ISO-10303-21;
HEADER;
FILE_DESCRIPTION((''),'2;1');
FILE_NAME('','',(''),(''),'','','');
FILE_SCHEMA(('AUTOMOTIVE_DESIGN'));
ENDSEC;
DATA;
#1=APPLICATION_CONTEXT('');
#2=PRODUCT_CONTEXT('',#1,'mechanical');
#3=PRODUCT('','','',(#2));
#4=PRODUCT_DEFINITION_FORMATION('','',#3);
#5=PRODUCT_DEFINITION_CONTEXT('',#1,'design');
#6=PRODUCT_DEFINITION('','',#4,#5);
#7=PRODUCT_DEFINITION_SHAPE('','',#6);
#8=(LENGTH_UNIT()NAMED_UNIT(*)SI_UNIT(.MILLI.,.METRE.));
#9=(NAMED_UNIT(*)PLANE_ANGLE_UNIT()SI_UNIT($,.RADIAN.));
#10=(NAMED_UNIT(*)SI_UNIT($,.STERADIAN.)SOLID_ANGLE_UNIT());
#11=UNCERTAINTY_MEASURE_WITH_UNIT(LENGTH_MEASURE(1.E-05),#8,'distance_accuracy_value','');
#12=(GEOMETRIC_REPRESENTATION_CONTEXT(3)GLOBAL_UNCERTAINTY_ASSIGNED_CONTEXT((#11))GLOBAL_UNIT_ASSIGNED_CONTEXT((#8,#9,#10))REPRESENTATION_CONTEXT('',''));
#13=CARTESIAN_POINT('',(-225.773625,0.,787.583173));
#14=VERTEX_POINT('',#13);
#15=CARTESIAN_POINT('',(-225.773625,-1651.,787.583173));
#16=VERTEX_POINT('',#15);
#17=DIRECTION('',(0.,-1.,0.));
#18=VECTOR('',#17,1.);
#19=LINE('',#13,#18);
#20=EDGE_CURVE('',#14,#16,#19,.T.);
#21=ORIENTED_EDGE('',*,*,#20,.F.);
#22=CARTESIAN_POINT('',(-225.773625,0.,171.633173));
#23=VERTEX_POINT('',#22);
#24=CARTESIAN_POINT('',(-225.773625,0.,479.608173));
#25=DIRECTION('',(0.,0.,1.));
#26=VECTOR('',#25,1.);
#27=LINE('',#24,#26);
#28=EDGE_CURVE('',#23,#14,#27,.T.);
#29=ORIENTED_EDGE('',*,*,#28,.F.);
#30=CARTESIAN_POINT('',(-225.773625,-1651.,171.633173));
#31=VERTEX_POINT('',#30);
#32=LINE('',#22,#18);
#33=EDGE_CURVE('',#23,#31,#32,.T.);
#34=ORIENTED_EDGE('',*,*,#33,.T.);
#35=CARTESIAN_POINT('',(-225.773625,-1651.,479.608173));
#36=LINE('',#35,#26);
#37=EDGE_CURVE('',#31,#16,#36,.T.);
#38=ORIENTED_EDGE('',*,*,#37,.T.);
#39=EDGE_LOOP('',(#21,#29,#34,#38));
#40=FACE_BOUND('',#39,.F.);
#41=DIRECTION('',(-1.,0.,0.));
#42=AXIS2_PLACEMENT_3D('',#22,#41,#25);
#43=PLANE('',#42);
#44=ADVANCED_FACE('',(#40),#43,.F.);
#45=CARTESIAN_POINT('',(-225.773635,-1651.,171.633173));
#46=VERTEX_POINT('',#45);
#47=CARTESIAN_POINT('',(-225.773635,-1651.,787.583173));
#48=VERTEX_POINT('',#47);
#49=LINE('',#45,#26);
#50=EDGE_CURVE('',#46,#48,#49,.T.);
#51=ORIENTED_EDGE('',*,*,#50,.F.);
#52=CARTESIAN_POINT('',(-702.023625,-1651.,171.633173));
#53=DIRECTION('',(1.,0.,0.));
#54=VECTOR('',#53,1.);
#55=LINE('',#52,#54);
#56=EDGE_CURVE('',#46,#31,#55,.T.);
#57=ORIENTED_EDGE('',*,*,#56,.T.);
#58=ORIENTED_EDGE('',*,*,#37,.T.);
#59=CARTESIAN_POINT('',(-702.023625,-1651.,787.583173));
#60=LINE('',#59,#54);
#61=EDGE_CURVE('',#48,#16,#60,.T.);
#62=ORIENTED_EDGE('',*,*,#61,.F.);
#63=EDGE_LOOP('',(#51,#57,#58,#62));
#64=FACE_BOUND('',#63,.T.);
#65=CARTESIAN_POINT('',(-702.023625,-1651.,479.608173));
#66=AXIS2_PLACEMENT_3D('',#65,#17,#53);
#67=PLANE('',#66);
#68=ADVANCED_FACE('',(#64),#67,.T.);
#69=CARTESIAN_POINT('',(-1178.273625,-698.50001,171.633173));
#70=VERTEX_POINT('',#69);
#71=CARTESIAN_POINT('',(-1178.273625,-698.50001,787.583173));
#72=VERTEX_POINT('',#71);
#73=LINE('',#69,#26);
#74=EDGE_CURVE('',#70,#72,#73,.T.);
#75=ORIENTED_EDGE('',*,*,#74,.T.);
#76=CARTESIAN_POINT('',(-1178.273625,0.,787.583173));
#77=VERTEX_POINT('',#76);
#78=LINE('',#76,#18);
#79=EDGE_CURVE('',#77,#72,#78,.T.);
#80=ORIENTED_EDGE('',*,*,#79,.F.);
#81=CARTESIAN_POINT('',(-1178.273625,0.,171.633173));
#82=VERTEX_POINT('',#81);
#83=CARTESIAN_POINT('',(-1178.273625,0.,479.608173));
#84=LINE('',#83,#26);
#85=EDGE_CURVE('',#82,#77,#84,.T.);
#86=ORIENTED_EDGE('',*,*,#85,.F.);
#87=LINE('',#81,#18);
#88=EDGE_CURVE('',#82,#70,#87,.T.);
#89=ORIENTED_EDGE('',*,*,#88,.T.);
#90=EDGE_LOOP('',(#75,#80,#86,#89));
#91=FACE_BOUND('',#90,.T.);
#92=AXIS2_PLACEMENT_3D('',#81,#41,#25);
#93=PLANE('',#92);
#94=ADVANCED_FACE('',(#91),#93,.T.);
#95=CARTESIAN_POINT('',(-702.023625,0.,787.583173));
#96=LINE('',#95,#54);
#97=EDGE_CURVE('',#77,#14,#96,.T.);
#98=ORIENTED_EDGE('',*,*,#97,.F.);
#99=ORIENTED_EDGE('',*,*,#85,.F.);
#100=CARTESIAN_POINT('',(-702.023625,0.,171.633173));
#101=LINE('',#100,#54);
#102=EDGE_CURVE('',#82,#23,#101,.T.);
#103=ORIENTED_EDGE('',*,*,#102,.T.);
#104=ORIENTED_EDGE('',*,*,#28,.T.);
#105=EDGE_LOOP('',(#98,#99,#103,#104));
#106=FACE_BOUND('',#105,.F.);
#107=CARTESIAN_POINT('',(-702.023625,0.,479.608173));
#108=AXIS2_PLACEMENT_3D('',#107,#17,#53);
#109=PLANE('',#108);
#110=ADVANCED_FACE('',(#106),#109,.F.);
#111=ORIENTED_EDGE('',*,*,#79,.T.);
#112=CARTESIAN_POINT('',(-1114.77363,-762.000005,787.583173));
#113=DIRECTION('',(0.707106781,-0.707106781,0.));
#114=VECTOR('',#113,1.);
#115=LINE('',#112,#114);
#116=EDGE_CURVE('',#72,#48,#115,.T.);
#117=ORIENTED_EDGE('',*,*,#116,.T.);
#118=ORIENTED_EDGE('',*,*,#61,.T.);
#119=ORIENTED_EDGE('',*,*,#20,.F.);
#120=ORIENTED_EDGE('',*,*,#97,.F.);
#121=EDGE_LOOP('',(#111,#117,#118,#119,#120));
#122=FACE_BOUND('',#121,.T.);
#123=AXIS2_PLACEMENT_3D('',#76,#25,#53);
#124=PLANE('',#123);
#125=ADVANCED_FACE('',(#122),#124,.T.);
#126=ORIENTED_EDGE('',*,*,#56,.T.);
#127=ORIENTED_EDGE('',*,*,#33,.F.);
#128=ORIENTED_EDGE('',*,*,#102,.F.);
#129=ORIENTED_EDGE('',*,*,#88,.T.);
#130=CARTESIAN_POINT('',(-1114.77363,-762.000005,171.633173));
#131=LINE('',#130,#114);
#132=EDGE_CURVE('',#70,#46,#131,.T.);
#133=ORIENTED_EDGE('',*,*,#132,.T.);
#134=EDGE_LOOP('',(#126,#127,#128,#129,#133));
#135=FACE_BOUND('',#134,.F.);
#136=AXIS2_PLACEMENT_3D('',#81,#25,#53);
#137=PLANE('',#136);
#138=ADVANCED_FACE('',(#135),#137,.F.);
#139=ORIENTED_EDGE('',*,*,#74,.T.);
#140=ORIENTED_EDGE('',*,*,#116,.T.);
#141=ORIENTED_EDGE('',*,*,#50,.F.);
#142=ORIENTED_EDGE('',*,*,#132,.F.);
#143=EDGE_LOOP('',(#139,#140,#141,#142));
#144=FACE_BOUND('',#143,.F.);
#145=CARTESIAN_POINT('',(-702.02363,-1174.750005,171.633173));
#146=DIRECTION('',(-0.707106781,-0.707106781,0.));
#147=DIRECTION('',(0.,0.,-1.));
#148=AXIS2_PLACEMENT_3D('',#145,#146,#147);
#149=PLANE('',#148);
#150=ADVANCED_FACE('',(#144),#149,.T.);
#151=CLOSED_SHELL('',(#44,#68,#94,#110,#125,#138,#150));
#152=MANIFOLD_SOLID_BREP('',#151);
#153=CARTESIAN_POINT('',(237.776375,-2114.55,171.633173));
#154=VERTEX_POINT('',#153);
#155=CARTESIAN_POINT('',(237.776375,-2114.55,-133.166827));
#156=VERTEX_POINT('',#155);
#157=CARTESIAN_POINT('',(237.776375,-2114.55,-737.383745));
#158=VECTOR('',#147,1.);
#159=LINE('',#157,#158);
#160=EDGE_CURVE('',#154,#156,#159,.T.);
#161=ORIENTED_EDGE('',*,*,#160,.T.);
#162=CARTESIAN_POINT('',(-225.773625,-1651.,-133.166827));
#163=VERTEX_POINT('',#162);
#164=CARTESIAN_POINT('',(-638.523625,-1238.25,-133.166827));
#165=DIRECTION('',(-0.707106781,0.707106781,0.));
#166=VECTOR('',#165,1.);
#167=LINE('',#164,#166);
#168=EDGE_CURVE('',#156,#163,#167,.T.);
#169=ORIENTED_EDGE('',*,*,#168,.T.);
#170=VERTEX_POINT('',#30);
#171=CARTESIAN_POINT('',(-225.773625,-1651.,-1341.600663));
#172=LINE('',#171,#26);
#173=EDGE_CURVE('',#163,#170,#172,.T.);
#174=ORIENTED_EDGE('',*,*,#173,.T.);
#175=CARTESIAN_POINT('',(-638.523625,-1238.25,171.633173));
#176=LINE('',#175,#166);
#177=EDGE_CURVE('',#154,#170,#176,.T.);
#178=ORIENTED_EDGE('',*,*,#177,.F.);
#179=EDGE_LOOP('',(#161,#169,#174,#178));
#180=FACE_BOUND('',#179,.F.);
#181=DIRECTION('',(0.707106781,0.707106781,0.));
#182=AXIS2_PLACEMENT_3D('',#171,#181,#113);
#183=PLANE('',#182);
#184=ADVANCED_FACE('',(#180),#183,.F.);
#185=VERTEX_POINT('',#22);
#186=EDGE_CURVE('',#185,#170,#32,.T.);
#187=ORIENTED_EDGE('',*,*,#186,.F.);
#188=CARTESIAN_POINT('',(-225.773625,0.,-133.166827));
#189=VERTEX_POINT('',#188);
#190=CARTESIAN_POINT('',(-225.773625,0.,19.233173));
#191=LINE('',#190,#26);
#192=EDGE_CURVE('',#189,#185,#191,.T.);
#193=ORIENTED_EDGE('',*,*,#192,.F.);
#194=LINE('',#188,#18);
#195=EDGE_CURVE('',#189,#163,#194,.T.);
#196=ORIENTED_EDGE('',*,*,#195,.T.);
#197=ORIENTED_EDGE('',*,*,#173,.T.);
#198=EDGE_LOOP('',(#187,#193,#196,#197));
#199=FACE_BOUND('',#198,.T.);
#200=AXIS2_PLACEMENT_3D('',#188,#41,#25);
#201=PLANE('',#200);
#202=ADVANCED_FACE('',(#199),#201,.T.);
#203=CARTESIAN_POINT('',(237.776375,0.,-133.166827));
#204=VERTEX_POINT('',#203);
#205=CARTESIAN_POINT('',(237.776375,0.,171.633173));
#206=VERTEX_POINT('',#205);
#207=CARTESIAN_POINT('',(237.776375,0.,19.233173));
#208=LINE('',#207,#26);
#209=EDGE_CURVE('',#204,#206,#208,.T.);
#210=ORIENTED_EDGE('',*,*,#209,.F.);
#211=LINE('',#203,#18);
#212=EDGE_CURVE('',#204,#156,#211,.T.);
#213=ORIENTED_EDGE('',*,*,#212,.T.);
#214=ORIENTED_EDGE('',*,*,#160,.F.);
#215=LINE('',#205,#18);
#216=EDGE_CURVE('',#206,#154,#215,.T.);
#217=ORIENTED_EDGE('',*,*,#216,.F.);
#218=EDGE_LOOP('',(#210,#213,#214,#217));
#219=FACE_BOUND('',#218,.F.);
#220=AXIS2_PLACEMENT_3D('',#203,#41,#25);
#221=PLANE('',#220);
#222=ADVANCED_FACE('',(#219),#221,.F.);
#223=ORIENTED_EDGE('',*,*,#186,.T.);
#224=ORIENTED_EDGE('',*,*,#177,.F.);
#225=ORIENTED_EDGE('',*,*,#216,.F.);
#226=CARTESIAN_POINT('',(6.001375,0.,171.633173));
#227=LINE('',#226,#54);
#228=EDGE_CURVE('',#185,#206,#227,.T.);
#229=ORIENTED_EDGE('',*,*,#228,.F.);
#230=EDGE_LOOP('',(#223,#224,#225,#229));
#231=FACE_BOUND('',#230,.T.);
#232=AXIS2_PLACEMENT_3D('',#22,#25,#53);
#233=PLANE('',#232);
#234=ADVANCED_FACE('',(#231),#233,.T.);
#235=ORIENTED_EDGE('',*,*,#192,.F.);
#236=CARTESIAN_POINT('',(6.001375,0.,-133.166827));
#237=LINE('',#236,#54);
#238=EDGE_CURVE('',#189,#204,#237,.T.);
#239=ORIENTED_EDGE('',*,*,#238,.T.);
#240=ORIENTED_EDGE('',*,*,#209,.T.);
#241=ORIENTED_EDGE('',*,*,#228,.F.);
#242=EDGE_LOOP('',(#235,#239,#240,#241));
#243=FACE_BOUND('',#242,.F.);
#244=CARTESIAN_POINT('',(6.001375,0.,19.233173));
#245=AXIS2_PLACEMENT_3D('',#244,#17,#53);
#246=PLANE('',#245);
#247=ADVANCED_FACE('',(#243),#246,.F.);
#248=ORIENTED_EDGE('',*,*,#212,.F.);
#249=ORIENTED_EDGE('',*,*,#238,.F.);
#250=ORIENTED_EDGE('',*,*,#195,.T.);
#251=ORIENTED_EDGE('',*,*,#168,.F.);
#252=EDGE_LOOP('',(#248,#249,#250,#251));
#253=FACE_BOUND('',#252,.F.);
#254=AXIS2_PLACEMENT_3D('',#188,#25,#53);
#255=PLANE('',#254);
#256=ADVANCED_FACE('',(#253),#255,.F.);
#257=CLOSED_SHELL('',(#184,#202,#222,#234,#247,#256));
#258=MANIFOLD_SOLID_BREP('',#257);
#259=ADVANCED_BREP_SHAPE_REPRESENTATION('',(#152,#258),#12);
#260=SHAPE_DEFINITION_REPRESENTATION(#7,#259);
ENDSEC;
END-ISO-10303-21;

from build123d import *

# Parameters (mm, degrees)
F1_W        = 463.55
F1_H        = 304.8
F2_DEPTH    = 2120.9
F1_W_2      = 952.5
F1_H_2      = 615.95
F3_DEPTH    = 1651
F4_T1_DEPTH = 2721.6676720904
F5_SIZE     = 952.49999


# Not quite as in the source:
# - a fillet or chamfer that OpenCascade refuses, or shapes differently, is made with other operations: its cross-section is extruded or revolved along the edge and cut away or added
# - a fillet or chamfer is up to 0.001 mm smaller than in the source, because OpenCascade refuses the exact size


with BuildPart() as f2:
    # F1 (on face) → F2 (new body)
    with BuildSketch(Plane.XZ):
        with Locations((6.0013753094, 19.2331727594)):
            Rectangle(F1_W, F1_H)
    extrude(amount=F2_DEPTH)

    # F4: chamfer of 469.9 on 1 edges, made by hand

    # F4_s2 → F4_t1 (cut)
    with BuildSketch(Plane.XY.offset(-1341.6006632858)):
        Polygon((-225.7736246906, -1651), (244.1263753094, -2120.9), (-225.7736246906, -2120.9), align=None)
    extrude(amount=F4_T1_DEPTH, mode=Mode.SUBTRACT)


with BuildPart() as f3:
    # F1 (on face) → F3 (new body)
    with BuildSketch(Plane.XZ):
        with Locations((-702.0236246906, 479.6081727594)):
            Rectangle(F1_W_2, F1_H_2)
    extrude(amount=F3_DEPTH)

    # F5 (size 952.5 in the source; OpenCascade refuses exactly that, so slightly less here)
    f5_edges = [f3.edges().sort_by_distance(p)[0] for p in [
        (-1178.273625, -1651, 479.608173),
    ]]
    chamfer(f5_edges, length=F5_SIZE)


solid = Compound([f2.part, f3.part])
